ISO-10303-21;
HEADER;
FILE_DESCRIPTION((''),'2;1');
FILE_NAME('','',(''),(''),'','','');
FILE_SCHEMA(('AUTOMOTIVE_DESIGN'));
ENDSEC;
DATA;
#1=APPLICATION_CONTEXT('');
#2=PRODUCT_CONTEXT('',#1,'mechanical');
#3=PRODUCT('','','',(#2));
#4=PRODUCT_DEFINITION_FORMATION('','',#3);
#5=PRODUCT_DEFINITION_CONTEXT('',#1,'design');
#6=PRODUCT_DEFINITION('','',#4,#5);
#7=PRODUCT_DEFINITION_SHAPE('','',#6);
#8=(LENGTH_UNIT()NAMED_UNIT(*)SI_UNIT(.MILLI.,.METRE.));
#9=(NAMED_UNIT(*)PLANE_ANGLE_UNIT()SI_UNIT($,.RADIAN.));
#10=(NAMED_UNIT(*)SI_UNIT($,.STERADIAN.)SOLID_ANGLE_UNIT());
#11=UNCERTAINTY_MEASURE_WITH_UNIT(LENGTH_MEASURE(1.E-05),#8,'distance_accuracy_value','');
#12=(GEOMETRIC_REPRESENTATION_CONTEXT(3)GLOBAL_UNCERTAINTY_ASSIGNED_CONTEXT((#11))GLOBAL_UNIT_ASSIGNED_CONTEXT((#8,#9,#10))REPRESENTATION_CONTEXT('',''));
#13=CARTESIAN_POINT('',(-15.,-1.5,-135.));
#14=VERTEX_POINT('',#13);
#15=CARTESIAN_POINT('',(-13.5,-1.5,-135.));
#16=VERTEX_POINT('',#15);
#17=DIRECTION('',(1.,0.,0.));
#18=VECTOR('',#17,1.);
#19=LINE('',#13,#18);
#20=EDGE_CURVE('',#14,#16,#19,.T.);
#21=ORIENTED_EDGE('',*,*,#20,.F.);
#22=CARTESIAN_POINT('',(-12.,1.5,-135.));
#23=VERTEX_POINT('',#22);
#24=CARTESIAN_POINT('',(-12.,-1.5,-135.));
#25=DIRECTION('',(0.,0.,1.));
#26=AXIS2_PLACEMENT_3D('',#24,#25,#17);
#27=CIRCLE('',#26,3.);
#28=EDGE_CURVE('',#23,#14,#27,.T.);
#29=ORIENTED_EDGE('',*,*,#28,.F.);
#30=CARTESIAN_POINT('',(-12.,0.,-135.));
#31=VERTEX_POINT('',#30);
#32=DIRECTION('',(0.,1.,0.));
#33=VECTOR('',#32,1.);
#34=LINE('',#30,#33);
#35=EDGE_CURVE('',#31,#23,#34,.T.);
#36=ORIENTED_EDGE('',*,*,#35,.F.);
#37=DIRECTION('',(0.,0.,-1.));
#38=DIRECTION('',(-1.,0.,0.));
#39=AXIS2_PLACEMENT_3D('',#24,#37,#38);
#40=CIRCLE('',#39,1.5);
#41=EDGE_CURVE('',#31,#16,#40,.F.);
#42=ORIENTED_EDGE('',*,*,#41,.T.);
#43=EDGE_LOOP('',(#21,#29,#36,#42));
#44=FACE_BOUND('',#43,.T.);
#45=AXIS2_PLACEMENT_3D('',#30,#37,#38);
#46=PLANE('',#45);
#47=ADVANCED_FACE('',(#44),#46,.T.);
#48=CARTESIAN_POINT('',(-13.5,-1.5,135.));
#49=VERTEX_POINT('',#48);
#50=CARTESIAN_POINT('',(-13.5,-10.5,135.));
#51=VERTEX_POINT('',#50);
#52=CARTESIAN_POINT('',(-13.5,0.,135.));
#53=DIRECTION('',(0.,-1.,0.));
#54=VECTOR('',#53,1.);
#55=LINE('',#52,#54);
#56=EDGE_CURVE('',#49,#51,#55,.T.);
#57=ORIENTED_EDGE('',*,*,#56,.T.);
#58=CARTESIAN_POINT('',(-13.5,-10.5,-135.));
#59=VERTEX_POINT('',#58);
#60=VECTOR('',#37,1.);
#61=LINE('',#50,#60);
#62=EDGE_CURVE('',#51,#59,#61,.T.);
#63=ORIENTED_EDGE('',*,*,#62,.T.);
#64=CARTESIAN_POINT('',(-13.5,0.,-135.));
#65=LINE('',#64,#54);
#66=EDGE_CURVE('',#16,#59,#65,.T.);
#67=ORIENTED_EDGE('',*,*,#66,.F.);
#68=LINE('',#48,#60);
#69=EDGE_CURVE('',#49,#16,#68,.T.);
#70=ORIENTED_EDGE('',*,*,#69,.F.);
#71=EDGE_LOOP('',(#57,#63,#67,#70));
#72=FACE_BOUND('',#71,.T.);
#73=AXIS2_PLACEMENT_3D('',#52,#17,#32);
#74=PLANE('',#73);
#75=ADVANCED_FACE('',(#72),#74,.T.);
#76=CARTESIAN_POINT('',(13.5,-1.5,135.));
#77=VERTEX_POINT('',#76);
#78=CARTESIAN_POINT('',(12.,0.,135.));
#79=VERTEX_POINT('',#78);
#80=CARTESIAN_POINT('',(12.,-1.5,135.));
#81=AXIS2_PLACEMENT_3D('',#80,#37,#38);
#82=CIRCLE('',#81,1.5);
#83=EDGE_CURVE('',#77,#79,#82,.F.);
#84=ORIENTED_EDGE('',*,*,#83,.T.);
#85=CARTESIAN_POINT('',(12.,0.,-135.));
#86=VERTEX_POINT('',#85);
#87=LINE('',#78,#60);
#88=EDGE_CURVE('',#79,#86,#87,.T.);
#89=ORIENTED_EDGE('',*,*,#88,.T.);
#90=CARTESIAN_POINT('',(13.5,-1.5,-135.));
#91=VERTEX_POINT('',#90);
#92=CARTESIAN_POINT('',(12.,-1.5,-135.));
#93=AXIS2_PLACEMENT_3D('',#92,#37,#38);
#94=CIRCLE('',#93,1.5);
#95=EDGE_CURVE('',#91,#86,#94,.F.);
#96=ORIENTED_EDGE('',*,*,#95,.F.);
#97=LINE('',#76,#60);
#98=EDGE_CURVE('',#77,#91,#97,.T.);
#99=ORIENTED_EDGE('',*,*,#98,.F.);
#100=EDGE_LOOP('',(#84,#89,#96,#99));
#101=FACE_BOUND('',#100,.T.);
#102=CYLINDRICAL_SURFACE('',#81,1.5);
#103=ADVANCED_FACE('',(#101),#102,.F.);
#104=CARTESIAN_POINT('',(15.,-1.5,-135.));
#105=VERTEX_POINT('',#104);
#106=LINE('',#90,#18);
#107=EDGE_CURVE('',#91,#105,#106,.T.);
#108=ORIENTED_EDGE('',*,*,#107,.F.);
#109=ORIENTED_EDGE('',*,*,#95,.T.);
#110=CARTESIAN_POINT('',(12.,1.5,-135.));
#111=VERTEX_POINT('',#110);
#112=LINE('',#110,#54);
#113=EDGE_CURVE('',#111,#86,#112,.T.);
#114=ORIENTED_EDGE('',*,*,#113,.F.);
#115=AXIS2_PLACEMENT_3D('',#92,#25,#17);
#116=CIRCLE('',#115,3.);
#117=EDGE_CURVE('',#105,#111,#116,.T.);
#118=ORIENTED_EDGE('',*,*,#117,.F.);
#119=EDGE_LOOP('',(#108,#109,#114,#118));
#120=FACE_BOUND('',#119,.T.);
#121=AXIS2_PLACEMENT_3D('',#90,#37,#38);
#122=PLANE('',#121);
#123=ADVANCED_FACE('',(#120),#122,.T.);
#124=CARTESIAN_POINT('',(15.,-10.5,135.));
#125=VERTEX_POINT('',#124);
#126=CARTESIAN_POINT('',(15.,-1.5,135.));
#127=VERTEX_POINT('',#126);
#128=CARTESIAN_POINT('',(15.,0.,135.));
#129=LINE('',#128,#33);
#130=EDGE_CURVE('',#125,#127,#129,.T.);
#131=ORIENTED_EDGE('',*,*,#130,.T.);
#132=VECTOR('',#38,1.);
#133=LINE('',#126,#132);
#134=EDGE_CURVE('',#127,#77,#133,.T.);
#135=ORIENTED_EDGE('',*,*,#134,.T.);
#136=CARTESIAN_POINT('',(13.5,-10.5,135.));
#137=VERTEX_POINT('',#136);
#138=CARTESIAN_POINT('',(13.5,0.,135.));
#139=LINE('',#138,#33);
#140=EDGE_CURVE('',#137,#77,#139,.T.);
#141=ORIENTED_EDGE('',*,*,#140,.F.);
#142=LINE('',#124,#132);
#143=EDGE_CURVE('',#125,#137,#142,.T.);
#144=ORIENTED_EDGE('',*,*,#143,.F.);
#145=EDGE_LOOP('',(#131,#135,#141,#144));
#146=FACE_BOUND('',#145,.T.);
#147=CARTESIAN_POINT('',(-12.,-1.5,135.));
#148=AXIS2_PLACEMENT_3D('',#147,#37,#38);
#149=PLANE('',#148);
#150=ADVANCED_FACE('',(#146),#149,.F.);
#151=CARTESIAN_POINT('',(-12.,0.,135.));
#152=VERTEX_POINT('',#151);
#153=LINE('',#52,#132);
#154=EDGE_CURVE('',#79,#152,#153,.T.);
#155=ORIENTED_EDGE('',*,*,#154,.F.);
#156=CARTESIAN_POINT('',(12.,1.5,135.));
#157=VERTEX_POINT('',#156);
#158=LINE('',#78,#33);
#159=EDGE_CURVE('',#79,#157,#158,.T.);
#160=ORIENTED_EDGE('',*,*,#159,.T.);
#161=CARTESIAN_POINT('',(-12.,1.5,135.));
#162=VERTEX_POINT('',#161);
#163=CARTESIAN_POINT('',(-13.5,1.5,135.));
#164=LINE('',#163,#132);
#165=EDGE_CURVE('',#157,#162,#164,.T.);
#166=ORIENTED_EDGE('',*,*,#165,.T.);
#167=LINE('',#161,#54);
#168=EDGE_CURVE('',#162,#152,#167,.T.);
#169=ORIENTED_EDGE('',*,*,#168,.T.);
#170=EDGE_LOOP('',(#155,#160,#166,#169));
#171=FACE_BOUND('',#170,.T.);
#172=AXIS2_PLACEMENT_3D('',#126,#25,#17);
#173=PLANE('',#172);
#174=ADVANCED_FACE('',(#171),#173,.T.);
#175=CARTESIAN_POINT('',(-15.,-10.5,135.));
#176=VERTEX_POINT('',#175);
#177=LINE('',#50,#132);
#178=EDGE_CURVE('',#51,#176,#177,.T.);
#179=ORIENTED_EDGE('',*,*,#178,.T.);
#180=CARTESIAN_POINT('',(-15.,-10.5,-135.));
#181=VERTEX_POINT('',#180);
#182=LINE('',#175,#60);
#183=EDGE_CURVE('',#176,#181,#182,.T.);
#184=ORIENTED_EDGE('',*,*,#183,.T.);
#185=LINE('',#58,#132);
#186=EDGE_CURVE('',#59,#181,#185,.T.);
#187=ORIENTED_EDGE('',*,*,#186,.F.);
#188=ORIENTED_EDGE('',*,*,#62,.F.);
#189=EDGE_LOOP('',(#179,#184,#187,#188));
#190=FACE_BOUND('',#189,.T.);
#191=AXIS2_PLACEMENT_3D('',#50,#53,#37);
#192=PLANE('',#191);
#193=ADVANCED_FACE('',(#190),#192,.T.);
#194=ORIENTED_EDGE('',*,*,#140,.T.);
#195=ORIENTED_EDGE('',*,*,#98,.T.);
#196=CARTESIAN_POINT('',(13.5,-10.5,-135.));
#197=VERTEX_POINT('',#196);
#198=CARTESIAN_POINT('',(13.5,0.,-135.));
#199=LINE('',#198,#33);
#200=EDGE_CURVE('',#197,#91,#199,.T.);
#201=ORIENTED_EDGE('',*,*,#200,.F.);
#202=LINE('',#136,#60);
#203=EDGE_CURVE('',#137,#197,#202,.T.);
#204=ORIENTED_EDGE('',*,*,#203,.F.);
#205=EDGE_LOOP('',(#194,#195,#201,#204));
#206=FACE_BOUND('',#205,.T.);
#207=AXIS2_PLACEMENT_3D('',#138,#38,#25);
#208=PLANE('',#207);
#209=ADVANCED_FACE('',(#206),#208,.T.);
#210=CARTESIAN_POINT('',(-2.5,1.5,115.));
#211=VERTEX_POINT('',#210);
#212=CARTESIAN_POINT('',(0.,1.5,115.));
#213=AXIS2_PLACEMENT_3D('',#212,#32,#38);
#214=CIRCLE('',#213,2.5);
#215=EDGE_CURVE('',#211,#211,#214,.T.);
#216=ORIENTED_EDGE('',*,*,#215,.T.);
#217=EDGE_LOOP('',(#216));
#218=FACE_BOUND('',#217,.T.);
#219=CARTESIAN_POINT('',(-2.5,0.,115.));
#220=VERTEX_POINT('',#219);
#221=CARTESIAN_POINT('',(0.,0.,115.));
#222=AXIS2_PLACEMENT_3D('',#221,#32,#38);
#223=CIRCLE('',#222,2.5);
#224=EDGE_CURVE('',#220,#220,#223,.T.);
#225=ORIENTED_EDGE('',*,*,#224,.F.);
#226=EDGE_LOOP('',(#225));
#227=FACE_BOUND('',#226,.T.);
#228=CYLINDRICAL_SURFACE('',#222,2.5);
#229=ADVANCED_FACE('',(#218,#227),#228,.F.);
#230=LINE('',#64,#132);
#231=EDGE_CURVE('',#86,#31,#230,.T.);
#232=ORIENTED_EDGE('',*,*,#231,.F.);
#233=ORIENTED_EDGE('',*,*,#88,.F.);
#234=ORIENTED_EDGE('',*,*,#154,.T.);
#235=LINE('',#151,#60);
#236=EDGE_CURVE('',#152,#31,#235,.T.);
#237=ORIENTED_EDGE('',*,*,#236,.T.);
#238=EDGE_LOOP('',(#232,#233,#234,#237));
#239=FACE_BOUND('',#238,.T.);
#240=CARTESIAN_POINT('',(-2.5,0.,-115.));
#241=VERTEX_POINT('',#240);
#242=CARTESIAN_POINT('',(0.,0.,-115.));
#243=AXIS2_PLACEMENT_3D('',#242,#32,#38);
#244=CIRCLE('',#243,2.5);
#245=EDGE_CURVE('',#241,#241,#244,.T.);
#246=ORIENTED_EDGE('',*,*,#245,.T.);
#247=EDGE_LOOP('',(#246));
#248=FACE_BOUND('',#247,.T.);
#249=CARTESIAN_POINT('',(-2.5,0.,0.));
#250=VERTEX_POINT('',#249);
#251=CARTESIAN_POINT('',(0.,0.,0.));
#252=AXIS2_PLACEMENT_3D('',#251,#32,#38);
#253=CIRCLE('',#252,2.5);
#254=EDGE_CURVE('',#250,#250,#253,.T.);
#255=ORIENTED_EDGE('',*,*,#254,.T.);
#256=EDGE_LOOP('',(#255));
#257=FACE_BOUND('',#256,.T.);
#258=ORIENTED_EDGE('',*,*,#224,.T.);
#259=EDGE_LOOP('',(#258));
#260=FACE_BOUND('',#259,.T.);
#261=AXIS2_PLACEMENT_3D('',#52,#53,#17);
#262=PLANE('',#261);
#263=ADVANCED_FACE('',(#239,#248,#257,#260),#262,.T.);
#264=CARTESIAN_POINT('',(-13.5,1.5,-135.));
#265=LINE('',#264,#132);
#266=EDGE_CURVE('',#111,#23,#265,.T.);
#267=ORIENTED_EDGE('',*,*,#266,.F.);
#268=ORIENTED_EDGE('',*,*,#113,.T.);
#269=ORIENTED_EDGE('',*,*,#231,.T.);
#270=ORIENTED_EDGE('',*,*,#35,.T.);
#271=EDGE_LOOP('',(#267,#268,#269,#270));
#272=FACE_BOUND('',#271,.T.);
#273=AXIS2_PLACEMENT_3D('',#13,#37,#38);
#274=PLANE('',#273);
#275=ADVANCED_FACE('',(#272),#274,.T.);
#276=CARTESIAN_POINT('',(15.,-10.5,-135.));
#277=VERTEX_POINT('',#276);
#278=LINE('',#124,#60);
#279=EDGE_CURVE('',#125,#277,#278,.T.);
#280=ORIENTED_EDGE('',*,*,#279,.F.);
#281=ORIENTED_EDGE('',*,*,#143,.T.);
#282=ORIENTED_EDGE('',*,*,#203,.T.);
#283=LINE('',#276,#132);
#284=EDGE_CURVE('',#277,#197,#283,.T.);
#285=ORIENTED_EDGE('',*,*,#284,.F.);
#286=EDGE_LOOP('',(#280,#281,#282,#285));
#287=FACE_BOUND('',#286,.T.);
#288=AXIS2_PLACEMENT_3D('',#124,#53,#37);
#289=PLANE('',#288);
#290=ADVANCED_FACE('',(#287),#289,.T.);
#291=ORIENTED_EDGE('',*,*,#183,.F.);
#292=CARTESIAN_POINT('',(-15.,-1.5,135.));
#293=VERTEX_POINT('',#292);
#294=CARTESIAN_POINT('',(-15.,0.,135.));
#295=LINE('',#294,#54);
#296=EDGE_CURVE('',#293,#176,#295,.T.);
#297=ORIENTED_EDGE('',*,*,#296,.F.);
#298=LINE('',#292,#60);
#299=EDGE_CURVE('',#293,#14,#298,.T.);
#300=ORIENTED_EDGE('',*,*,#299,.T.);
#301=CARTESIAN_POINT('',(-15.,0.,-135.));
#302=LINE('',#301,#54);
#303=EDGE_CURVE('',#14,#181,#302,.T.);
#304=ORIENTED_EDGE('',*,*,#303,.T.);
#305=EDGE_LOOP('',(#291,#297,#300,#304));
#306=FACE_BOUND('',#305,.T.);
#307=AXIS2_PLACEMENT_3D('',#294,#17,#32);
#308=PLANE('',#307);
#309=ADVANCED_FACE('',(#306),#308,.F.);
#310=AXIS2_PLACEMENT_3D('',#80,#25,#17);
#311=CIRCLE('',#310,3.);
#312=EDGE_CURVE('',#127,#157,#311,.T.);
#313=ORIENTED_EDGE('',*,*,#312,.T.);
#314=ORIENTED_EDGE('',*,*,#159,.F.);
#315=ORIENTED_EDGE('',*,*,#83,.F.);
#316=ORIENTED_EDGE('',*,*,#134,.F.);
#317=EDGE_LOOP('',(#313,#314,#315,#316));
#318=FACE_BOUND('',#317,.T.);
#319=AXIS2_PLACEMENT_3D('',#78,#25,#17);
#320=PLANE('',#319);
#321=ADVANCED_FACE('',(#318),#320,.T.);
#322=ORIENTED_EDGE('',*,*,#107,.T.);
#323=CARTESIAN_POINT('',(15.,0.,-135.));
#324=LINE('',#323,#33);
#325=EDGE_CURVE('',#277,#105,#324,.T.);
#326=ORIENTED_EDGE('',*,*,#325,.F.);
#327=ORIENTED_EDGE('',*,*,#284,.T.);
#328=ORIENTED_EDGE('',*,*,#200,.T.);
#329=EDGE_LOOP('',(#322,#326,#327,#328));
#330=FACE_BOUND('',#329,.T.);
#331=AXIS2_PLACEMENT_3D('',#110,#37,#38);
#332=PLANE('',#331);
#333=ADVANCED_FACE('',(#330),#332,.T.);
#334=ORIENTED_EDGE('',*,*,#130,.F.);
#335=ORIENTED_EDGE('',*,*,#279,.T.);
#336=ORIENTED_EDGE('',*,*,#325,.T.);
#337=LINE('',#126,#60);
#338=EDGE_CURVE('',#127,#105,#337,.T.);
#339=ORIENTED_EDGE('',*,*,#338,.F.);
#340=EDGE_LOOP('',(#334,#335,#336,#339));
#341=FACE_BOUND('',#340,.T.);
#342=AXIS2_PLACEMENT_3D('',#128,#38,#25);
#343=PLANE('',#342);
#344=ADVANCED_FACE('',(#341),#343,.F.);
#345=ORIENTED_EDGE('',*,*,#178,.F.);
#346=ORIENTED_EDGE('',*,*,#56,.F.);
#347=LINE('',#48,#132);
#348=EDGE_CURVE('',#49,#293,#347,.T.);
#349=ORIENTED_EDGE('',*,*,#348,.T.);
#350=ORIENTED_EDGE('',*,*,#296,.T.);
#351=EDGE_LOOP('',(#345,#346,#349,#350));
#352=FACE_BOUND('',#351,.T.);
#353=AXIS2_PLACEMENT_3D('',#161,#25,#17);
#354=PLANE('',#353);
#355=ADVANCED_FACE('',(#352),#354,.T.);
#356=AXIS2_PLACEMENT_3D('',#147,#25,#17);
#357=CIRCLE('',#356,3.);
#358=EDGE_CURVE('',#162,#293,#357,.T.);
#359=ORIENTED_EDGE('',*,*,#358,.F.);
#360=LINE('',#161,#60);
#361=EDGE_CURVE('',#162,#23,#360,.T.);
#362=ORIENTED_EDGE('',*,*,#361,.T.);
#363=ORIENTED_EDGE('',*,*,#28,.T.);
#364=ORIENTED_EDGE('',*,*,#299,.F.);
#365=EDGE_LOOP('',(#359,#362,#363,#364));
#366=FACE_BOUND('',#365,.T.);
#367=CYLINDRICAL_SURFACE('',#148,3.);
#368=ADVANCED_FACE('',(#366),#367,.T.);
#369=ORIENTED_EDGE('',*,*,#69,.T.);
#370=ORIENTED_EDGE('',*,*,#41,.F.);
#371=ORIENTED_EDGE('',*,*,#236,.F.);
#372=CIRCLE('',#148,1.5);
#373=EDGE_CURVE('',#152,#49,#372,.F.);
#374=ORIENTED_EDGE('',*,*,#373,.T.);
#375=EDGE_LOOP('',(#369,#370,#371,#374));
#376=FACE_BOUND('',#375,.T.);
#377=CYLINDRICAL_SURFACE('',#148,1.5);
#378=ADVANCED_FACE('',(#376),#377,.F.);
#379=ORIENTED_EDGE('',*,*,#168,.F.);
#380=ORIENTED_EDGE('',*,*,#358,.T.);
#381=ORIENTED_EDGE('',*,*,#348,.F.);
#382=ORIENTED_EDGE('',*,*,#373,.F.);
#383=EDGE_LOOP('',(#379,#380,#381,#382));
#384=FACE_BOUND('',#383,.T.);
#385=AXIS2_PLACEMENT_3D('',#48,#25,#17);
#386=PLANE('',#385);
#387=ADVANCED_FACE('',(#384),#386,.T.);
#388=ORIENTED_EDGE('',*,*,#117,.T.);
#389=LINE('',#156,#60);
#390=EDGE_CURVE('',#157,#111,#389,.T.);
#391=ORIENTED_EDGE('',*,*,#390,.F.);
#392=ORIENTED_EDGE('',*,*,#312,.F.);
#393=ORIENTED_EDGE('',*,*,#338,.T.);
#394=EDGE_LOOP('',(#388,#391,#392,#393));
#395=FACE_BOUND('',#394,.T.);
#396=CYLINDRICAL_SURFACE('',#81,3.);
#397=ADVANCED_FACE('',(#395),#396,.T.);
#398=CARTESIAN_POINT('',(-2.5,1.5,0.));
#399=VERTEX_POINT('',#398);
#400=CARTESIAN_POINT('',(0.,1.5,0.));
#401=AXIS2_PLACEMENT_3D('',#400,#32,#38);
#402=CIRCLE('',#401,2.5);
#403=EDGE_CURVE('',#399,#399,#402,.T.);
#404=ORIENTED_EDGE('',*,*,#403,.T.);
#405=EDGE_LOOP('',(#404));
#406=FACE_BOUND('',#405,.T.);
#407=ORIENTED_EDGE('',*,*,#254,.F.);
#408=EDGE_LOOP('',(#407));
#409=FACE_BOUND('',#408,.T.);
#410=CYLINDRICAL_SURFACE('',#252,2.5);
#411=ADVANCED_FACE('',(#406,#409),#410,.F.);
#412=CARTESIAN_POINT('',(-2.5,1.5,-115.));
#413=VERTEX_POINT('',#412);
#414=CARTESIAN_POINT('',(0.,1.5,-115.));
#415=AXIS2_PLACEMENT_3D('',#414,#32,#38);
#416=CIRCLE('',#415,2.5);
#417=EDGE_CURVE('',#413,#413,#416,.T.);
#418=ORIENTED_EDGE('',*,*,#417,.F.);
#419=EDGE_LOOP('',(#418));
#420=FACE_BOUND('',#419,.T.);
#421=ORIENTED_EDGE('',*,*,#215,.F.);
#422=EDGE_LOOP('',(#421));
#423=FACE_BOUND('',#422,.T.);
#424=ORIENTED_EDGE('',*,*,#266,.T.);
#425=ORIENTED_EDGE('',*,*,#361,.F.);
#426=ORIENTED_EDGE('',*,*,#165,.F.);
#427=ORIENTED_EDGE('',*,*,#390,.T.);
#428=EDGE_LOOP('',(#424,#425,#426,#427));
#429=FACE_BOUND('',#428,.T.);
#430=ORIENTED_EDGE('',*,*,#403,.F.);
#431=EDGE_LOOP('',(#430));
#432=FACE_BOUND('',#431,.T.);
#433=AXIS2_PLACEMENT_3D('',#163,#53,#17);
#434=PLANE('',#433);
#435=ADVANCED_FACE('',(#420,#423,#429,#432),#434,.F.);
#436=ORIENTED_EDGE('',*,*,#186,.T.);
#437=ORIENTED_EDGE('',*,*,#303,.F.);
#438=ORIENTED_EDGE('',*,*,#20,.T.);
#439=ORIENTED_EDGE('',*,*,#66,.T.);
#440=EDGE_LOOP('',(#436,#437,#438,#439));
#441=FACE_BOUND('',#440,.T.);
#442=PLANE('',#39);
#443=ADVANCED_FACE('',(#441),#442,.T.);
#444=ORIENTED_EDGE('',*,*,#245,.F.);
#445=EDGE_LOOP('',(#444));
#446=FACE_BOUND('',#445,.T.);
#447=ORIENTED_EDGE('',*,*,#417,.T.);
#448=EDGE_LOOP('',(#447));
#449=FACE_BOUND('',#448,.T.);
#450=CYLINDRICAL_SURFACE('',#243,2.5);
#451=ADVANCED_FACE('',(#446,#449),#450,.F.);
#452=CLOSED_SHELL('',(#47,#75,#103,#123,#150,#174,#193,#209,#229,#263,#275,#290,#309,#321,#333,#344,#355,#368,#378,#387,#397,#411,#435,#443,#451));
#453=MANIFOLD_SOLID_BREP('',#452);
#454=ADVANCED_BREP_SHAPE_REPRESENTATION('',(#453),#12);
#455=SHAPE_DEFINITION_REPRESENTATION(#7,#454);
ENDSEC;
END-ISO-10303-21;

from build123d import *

# Parameters (mm, degrees)
SM_BASE_FLANGE_1_DEPTH = 135
SKETCH_2_R             = 2.5
CUT_EXTRUDE_1_DEPTH    = 10


# Sheet-metal steps are written as plain solids
with BuildPart() as part:
    # Sketch 1 → Базовая кромка1 (new, symmetric)
    with BuildSketch(Plane.XY):
        with BuildLine():
            Line((-13.5, -10.5), (-13.5, -1.5))
            ThreePointArc((-13.5, -1.5), (-13.060660172, -0.439339828), (-12, 0))
            Line((-12, 0), (12, 0))
            ThreePointArc((12, 0), (13.060660172, -0.439339828), (13.5, -1.5))
            Line((13.5, -1.5), (13.5, -10.5))
            Line((13.5, -10.5), (15, -10.5))
            Line((15, -10.5), (15, -1.5))
            ThreePointArc((15, -1.5), (14.121320344, 0.621320344), (12, 1.5))
            Line((12, 1.5), (-12, 1.5))
            ThreePointArc((-12, 1.5), (-14.121320344, 0.621320344), (-15, -1.5))
            Line((-15, -1.5), (-15, -10.5))
            Line((-15, -10.5), (-13.5, -10.5))
        make_face()
    extrude(amount=SM_BASE_FLANGE_1_DEPTH, both=True)

    # Sketch 2 → Вырез-Вытянуть1 (cut)
    with BuildSketch(Plane(origin=(0, 1.5, 0), x_dir=(1, 0, 0), z_dir=(0, 1, 0))):
        with Locations(Location((0, 0, 0), (0, 0, 180))):
            Circle(SKETCH_2_R)
        with Locations((0, 460)):
            Circle(SKETCH_2_R)
        with Locations(Location((0, -115, 0), (0, 0, 180))):
            Circle(SKETCH_2_R)
        with Locations((0, -230)):
            Circle(SKETCH_2_R)
        with Locations((0, -345)):
            Circle(SKETCH_2_R)
        with Locations((0, -460)):
            Circle(SKETCH_2_R)
        with Locations(Location((0, 115, 0), (0, 0, 180))):
            Circle(SKETCH_2_R)
        with Locations((0, 230)):
            Circle(SKETCH_2_R)
        with Locations((0, 345)):
            Circle(SKETCH_2_R)
    extrude(amount=-CUT_EXTRUDE_1_DEPTH, mode=Mode.SUBTRACT)


solid = part.part
